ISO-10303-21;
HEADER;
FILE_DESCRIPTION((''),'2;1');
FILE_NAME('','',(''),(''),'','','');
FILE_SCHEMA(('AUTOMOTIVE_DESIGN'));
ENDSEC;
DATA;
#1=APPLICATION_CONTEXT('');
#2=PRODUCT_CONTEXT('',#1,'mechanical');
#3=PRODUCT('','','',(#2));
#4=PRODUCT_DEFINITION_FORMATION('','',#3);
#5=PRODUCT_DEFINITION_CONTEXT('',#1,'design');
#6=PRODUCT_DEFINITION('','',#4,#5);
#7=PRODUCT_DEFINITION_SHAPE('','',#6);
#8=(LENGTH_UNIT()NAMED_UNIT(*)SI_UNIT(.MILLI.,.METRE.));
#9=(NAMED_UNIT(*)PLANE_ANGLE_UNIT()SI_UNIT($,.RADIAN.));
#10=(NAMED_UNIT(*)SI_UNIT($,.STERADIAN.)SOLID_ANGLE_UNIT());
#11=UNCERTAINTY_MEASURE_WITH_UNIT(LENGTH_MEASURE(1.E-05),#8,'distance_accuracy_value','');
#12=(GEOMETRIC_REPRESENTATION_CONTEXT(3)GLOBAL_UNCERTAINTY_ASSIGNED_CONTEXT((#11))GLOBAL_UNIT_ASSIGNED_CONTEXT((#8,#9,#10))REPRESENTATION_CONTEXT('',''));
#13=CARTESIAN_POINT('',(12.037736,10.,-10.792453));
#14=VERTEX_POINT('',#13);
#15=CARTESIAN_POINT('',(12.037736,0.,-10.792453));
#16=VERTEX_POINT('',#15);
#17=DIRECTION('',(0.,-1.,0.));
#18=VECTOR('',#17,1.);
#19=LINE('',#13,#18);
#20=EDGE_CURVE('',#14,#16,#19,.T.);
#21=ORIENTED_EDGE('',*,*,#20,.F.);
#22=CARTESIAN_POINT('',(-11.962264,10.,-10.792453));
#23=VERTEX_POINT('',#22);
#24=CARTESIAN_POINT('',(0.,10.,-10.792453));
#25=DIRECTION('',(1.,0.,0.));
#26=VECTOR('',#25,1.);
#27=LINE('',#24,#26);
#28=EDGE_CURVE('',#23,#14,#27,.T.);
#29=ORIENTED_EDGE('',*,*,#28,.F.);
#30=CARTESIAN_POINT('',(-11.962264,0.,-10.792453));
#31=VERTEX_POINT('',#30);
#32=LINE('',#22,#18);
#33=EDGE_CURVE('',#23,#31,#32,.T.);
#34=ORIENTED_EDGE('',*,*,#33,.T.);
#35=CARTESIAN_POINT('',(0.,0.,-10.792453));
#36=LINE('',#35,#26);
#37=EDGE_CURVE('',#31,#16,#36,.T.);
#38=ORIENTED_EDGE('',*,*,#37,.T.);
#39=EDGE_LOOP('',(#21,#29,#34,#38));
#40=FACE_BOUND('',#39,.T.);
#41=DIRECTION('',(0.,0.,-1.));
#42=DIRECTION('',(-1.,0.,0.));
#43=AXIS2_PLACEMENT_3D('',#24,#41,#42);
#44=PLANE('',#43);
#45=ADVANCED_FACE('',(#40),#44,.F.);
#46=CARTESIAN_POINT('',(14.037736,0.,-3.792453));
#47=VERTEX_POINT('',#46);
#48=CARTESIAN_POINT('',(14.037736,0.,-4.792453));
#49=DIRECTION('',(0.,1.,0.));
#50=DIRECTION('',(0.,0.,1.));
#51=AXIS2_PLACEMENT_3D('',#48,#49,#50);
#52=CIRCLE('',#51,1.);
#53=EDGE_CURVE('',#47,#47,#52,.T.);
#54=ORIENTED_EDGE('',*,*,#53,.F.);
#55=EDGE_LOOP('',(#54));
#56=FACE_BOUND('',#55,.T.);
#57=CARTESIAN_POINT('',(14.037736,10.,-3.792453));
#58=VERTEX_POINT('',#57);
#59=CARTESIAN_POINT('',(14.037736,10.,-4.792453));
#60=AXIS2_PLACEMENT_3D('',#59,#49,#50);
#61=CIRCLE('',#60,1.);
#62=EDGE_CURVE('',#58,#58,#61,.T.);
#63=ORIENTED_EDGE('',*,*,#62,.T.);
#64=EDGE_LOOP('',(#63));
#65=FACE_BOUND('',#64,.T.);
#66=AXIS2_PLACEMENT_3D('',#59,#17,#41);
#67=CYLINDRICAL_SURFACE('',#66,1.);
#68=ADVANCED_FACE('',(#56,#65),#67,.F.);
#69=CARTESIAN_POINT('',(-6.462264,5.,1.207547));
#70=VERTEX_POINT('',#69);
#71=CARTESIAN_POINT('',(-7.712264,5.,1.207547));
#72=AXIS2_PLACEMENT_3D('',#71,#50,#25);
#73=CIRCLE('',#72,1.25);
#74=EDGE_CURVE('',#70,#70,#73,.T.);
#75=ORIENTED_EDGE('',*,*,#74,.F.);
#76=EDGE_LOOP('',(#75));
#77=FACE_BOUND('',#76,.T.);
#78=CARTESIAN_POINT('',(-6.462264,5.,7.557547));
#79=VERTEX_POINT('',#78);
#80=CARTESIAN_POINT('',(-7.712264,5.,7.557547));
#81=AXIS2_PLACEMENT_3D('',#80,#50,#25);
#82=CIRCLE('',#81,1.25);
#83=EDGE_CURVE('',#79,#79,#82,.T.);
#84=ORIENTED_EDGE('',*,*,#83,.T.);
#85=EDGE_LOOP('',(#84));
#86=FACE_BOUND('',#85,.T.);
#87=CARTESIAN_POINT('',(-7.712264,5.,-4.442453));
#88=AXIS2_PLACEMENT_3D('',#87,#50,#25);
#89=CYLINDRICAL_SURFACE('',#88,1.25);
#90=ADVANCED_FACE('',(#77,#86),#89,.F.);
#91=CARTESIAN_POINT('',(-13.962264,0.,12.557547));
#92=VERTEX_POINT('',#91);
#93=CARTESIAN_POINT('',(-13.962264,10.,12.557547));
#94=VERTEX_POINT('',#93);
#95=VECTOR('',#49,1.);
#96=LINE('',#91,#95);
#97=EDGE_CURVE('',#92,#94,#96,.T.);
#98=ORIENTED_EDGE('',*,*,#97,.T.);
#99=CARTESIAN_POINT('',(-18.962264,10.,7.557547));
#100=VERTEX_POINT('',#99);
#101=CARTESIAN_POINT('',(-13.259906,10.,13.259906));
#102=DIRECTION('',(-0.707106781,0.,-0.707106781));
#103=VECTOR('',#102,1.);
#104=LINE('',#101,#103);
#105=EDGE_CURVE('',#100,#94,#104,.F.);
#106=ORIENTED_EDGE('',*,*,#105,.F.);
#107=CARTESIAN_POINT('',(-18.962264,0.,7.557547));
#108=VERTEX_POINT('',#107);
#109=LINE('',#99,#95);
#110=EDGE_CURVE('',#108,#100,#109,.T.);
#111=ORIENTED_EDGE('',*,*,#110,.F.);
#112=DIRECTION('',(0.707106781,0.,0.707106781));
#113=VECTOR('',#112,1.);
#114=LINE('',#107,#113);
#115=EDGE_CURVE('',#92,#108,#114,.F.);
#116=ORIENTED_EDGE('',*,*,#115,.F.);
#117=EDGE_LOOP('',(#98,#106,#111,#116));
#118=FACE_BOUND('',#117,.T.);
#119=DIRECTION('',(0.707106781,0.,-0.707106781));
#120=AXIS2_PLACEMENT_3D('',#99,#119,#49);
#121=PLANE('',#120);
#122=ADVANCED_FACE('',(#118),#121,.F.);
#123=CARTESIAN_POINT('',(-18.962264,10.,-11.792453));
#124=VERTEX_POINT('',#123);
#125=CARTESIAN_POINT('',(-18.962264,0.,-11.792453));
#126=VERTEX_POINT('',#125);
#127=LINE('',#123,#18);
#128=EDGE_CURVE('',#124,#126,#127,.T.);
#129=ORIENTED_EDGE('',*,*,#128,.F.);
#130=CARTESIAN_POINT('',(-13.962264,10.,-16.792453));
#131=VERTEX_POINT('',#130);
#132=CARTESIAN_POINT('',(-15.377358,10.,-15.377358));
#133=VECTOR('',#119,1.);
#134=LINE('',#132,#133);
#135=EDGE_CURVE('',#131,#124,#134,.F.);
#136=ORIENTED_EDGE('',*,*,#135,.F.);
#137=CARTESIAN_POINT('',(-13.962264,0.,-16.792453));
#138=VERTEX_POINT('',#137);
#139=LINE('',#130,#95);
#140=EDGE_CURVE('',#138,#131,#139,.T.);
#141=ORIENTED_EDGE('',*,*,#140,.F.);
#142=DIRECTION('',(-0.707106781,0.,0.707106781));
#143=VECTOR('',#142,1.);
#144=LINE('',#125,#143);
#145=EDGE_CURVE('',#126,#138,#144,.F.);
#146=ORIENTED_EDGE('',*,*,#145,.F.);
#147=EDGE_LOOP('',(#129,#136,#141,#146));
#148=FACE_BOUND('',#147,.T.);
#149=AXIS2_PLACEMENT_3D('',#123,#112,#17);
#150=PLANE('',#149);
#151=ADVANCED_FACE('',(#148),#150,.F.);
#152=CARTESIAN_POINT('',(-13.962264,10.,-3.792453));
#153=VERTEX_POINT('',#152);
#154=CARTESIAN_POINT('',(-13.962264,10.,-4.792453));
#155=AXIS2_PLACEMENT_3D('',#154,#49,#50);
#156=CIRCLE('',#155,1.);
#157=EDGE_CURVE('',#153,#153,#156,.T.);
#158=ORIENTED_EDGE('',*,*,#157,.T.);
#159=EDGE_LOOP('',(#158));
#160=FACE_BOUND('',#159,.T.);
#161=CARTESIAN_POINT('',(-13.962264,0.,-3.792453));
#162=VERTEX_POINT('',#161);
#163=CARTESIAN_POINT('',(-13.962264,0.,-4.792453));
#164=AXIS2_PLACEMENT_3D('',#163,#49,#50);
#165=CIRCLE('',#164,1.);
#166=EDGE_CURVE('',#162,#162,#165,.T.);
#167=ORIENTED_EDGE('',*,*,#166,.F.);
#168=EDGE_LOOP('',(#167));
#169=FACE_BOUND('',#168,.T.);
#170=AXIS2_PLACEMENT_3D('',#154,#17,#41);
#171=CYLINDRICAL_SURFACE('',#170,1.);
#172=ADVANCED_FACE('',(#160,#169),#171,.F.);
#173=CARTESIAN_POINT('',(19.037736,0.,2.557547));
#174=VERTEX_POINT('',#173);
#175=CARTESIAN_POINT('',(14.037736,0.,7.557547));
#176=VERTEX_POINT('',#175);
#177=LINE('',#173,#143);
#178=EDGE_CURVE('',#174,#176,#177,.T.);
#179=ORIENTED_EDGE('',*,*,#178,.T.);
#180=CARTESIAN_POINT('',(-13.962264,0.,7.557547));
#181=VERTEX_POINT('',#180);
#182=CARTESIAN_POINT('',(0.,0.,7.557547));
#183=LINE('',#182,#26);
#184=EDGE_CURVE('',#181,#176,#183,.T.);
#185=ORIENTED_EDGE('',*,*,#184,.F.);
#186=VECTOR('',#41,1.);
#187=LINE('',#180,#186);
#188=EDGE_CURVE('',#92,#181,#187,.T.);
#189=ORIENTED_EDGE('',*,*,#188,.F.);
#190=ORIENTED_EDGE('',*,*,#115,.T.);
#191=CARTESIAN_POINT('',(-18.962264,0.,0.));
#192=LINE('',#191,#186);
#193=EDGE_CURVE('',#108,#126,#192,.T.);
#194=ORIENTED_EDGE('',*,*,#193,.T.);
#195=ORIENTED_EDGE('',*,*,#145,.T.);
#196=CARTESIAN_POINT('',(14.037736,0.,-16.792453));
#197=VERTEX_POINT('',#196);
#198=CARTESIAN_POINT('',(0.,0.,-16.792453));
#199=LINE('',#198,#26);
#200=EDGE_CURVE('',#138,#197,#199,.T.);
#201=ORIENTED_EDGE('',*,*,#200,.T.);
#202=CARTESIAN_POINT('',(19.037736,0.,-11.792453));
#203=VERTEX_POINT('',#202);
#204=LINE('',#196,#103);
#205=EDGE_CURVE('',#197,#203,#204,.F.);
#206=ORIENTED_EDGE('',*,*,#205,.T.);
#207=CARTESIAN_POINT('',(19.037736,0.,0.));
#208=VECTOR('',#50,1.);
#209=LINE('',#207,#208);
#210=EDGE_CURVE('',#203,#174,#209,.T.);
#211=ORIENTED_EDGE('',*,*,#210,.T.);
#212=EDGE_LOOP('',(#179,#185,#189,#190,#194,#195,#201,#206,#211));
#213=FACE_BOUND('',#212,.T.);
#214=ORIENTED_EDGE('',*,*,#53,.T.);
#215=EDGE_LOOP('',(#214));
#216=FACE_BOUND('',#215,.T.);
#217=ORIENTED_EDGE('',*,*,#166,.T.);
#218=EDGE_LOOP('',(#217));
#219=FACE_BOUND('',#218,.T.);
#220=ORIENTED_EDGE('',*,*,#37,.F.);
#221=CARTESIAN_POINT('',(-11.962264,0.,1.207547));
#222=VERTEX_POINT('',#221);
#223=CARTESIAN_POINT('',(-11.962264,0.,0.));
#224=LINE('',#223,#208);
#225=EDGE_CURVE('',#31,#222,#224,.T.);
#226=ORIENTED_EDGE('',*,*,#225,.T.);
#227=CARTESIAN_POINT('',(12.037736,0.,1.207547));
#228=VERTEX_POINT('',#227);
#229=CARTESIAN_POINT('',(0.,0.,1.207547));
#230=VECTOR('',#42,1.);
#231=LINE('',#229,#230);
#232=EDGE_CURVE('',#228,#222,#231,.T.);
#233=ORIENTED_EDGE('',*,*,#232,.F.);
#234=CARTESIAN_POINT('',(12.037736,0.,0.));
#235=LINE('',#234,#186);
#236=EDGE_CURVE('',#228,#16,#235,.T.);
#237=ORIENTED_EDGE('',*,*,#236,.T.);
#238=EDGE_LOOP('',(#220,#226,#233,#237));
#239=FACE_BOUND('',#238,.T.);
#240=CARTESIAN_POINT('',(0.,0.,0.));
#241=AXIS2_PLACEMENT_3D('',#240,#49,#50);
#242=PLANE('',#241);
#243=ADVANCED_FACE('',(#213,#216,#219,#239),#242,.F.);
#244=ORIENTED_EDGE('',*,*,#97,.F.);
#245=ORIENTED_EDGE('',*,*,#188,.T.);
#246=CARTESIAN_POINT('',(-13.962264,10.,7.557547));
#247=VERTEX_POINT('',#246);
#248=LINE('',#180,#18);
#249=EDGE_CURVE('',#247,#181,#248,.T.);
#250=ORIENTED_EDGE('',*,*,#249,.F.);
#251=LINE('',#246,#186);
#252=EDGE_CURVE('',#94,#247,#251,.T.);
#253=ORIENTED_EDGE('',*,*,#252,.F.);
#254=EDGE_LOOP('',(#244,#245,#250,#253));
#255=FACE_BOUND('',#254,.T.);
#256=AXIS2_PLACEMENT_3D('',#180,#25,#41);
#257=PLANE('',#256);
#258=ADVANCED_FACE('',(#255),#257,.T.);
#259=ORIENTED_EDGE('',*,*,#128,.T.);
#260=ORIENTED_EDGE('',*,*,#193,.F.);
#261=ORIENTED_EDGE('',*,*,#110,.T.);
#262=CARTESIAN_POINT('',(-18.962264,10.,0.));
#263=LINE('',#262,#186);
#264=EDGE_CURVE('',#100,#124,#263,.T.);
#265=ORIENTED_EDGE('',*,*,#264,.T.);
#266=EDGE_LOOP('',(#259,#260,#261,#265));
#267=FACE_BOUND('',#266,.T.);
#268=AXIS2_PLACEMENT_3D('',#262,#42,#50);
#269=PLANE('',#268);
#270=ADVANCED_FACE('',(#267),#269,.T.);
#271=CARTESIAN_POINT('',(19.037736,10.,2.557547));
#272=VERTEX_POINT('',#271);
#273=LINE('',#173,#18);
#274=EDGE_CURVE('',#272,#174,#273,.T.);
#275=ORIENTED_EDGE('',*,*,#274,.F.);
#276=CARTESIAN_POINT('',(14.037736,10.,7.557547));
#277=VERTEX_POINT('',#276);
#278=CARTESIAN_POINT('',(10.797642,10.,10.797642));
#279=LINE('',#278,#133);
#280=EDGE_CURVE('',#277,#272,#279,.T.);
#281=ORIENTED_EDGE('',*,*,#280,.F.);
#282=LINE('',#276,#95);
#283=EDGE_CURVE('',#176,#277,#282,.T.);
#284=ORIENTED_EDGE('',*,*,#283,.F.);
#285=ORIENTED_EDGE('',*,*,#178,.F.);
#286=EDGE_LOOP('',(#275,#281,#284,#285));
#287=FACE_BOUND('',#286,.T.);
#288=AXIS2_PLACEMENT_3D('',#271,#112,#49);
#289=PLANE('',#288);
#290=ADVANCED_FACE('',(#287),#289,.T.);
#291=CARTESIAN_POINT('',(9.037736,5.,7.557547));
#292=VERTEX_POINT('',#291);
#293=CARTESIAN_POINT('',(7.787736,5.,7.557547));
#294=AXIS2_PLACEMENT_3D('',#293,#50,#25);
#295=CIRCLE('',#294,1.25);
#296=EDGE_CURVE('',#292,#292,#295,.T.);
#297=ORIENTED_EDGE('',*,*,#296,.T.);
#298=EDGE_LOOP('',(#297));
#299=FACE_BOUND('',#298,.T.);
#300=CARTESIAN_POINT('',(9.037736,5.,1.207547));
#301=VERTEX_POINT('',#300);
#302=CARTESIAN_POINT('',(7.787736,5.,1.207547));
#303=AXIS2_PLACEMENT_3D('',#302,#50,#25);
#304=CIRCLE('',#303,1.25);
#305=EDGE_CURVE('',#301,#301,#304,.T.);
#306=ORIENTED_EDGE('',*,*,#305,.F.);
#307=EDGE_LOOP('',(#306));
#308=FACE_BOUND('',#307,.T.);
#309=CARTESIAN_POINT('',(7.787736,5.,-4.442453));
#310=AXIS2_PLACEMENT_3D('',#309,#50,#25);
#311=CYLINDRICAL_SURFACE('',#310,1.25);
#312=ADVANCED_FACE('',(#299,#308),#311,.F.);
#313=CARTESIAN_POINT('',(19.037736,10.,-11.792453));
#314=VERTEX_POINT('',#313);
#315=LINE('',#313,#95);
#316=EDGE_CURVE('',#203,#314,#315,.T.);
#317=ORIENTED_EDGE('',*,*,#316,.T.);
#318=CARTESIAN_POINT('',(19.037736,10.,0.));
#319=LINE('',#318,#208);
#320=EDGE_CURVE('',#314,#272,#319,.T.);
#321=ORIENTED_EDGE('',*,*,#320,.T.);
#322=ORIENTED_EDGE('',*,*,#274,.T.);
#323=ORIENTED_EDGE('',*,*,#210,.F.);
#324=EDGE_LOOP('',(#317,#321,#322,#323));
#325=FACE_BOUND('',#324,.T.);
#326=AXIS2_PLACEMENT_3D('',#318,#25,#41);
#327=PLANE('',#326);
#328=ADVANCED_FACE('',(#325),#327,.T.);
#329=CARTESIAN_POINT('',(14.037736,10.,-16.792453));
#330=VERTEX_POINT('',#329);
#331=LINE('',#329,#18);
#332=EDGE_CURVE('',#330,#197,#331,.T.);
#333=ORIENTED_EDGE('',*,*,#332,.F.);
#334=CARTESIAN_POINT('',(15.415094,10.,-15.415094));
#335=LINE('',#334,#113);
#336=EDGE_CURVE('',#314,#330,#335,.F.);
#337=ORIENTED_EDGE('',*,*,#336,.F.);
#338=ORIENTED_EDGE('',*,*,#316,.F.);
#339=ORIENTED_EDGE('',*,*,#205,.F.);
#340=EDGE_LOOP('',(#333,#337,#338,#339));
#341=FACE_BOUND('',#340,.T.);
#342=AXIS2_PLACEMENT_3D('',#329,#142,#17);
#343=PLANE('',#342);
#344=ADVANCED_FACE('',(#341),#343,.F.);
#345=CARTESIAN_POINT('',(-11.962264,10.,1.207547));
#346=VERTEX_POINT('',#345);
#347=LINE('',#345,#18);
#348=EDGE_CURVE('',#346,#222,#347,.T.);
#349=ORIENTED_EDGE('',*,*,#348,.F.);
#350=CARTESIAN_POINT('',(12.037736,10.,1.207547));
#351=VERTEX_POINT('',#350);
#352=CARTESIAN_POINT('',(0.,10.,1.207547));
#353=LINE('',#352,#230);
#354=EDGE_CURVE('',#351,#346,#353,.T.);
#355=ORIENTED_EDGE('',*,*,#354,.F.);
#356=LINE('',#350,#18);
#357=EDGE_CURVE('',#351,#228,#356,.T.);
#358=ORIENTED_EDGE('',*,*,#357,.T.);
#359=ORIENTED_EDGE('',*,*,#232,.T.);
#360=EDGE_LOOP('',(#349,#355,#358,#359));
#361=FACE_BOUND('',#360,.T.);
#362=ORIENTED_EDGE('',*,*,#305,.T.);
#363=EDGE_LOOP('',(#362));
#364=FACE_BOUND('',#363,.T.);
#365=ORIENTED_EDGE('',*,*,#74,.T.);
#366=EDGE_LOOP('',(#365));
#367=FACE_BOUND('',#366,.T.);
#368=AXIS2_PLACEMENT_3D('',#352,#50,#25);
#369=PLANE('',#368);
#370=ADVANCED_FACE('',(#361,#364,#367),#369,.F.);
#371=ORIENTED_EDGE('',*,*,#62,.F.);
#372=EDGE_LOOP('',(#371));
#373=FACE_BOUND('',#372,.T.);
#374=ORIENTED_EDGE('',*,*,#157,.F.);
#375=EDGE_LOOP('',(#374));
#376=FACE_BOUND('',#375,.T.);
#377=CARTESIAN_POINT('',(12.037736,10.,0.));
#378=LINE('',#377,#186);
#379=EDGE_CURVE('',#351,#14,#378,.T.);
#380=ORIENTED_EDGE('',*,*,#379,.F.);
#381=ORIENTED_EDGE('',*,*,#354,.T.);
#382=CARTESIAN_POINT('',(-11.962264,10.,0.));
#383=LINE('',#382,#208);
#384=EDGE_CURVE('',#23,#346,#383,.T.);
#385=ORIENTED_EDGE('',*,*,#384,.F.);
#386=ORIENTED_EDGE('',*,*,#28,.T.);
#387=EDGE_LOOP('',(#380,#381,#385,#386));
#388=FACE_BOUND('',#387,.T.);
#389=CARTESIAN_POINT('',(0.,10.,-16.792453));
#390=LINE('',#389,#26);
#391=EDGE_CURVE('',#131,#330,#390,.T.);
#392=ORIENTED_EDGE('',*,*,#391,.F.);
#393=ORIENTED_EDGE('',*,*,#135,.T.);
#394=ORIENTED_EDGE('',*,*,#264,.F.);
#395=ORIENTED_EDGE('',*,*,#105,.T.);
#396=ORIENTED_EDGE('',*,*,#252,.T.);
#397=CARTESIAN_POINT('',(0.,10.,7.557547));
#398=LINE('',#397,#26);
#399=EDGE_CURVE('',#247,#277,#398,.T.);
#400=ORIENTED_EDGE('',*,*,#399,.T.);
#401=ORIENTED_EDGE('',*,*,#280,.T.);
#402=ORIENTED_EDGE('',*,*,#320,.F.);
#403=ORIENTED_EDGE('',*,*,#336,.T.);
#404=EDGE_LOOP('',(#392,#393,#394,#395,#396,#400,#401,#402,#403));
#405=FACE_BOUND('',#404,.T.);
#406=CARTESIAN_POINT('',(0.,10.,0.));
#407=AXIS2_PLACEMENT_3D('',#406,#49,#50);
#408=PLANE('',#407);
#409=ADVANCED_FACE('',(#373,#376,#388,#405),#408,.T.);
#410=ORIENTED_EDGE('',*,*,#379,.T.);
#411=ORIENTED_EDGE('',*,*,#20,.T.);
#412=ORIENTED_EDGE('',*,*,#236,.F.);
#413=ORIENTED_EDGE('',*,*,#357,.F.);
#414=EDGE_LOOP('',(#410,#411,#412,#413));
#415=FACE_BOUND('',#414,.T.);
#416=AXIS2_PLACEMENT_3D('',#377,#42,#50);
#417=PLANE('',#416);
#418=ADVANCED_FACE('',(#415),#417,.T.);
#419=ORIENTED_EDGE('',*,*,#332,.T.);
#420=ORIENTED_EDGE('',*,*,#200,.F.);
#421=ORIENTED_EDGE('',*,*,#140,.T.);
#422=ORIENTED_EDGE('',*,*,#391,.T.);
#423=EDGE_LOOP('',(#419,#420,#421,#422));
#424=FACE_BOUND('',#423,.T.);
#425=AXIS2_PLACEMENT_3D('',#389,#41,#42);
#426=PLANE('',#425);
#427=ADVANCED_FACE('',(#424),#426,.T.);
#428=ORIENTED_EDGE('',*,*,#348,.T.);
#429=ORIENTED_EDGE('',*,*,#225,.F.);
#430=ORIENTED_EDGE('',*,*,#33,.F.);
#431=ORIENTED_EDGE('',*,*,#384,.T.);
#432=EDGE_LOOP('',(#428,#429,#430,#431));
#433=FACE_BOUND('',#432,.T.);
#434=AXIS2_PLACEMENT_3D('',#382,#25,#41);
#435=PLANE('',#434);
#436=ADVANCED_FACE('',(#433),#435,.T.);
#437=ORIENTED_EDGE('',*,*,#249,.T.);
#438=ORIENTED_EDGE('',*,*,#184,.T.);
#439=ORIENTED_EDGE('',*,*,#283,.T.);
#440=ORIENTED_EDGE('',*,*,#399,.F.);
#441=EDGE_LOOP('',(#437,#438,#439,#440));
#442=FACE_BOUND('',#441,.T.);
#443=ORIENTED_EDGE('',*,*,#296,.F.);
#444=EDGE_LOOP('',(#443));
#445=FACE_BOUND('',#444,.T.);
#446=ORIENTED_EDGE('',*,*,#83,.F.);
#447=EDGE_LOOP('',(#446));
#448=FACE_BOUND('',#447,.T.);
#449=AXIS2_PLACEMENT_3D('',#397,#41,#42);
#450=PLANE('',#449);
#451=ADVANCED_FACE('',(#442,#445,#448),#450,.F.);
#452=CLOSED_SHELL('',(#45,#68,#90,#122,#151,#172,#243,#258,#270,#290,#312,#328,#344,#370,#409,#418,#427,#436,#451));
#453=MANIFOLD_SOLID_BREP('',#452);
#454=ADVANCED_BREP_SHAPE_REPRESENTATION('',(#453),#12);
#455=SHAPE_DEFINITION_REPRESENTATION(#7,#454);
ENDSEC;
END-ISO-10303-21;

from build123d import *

# Parameters (mm, degrees)
SKETCH1_R           = 1
SKETCH1_W           = 24
SKETCH1_H           = 12
BOSS_EXTRUDE2_DEPTH = 10
CHAMFER1_SIZE       = 5
SKETCH3_R           = 1.25
CUT_EXTRUDE1_DEPTH  = 12
BOSS_EXTRUDE3_DEPTH = 10
CHAMFER2_SIZE       = 5


with BuildPart() as part:
    # Sketch1 → Boss-Extrude2 (new body)
    with BuildSketch(Plane(origin=(0, 0, 0), x_dir=(1, 0, 0), z_dir=(0, 1, 0))):
        Polygon((-18.962264151, -7.55754717), (19.037735849, -7.55754717), (19.037735849, 4.79245283), (19.037735849, 16.79245283), (-18.962264151, 16.79245283), (-18.962264151, 4.79245283), align=None)
        with Locations(Location((-13.962264151, 4.79245283, 0), (0, 0, 270))):
            Circle(SKETCH1_R, mode=Mode.SUBTRACT)
        with Locations(Location((14.037735849, 4.79245283, 0), (0, 0, 270))):
            Circle(SKETCH1_R, mode=Mode.SUBTRACT)
        with Locations((0.037735849, 4.79245283)):
            Rectangle(SKETCH1_W, SKETCH1_H, mode=Mode.SUBTRACT)
    extrude(amount=BOSS_EXTRUDE2_DEPTH)

    # Chamfer1
    chamfer1_edges = [part.edges().sort_by_distance(p)[0] for p in [
        (19.037735849, 5, 7.55754717),
        (-18.962264151, 5, 7.55754717),
        (-18.962264151, 5, -16.79245283),
        (19.037735849, 5, -16.79245283),
    ]]
    chamfer(chamfer1_edges, length=CHAMFER1_SIZE)

    # Sketch3 → Cut-Extrude1 (cut)
    with BuildSketch(Plane.XY.offset(7.55754717)):
        with Locations((-7.712264151, 5)):
            Circle(SKETCH3_R)
        with Locations((7.787735849, 5)):
            Circle(SKETCH3_R)
    extrude(amount=-CUT_EXTRUDE1_DEPTH, mode=Mode.SUBTRACT)

    # Sketch4 → Boss-Extrude3 (add)
    with BuildSketch(Plane(origin=(0, 10, 0), x_dir=(1, 0, 0), z_dir=(0, 1, 0))):
        Polygon((-13.962264151, -7.55754717), (-13.962264151, -12.55754717), (-18.962264151, -12.55754717), (-18.962264151, -2.55754717), (-13.962264151, -0.983393269), align=None)
    extrude(amount=-BOSS_EXTRUDE3_DEPTH)

    # Chamfer2
    chamfer2_edges = [part.edges().sort_by_distance(p)[0] for p in [
        (-18.962264151, 5, 12.55754717),
    ]]
    chamfer(chamfer2_edges, length=CHAMFER2_SIZE - 0.0001)  # a hair under: the kernel refuses the full size


solid = part.part
